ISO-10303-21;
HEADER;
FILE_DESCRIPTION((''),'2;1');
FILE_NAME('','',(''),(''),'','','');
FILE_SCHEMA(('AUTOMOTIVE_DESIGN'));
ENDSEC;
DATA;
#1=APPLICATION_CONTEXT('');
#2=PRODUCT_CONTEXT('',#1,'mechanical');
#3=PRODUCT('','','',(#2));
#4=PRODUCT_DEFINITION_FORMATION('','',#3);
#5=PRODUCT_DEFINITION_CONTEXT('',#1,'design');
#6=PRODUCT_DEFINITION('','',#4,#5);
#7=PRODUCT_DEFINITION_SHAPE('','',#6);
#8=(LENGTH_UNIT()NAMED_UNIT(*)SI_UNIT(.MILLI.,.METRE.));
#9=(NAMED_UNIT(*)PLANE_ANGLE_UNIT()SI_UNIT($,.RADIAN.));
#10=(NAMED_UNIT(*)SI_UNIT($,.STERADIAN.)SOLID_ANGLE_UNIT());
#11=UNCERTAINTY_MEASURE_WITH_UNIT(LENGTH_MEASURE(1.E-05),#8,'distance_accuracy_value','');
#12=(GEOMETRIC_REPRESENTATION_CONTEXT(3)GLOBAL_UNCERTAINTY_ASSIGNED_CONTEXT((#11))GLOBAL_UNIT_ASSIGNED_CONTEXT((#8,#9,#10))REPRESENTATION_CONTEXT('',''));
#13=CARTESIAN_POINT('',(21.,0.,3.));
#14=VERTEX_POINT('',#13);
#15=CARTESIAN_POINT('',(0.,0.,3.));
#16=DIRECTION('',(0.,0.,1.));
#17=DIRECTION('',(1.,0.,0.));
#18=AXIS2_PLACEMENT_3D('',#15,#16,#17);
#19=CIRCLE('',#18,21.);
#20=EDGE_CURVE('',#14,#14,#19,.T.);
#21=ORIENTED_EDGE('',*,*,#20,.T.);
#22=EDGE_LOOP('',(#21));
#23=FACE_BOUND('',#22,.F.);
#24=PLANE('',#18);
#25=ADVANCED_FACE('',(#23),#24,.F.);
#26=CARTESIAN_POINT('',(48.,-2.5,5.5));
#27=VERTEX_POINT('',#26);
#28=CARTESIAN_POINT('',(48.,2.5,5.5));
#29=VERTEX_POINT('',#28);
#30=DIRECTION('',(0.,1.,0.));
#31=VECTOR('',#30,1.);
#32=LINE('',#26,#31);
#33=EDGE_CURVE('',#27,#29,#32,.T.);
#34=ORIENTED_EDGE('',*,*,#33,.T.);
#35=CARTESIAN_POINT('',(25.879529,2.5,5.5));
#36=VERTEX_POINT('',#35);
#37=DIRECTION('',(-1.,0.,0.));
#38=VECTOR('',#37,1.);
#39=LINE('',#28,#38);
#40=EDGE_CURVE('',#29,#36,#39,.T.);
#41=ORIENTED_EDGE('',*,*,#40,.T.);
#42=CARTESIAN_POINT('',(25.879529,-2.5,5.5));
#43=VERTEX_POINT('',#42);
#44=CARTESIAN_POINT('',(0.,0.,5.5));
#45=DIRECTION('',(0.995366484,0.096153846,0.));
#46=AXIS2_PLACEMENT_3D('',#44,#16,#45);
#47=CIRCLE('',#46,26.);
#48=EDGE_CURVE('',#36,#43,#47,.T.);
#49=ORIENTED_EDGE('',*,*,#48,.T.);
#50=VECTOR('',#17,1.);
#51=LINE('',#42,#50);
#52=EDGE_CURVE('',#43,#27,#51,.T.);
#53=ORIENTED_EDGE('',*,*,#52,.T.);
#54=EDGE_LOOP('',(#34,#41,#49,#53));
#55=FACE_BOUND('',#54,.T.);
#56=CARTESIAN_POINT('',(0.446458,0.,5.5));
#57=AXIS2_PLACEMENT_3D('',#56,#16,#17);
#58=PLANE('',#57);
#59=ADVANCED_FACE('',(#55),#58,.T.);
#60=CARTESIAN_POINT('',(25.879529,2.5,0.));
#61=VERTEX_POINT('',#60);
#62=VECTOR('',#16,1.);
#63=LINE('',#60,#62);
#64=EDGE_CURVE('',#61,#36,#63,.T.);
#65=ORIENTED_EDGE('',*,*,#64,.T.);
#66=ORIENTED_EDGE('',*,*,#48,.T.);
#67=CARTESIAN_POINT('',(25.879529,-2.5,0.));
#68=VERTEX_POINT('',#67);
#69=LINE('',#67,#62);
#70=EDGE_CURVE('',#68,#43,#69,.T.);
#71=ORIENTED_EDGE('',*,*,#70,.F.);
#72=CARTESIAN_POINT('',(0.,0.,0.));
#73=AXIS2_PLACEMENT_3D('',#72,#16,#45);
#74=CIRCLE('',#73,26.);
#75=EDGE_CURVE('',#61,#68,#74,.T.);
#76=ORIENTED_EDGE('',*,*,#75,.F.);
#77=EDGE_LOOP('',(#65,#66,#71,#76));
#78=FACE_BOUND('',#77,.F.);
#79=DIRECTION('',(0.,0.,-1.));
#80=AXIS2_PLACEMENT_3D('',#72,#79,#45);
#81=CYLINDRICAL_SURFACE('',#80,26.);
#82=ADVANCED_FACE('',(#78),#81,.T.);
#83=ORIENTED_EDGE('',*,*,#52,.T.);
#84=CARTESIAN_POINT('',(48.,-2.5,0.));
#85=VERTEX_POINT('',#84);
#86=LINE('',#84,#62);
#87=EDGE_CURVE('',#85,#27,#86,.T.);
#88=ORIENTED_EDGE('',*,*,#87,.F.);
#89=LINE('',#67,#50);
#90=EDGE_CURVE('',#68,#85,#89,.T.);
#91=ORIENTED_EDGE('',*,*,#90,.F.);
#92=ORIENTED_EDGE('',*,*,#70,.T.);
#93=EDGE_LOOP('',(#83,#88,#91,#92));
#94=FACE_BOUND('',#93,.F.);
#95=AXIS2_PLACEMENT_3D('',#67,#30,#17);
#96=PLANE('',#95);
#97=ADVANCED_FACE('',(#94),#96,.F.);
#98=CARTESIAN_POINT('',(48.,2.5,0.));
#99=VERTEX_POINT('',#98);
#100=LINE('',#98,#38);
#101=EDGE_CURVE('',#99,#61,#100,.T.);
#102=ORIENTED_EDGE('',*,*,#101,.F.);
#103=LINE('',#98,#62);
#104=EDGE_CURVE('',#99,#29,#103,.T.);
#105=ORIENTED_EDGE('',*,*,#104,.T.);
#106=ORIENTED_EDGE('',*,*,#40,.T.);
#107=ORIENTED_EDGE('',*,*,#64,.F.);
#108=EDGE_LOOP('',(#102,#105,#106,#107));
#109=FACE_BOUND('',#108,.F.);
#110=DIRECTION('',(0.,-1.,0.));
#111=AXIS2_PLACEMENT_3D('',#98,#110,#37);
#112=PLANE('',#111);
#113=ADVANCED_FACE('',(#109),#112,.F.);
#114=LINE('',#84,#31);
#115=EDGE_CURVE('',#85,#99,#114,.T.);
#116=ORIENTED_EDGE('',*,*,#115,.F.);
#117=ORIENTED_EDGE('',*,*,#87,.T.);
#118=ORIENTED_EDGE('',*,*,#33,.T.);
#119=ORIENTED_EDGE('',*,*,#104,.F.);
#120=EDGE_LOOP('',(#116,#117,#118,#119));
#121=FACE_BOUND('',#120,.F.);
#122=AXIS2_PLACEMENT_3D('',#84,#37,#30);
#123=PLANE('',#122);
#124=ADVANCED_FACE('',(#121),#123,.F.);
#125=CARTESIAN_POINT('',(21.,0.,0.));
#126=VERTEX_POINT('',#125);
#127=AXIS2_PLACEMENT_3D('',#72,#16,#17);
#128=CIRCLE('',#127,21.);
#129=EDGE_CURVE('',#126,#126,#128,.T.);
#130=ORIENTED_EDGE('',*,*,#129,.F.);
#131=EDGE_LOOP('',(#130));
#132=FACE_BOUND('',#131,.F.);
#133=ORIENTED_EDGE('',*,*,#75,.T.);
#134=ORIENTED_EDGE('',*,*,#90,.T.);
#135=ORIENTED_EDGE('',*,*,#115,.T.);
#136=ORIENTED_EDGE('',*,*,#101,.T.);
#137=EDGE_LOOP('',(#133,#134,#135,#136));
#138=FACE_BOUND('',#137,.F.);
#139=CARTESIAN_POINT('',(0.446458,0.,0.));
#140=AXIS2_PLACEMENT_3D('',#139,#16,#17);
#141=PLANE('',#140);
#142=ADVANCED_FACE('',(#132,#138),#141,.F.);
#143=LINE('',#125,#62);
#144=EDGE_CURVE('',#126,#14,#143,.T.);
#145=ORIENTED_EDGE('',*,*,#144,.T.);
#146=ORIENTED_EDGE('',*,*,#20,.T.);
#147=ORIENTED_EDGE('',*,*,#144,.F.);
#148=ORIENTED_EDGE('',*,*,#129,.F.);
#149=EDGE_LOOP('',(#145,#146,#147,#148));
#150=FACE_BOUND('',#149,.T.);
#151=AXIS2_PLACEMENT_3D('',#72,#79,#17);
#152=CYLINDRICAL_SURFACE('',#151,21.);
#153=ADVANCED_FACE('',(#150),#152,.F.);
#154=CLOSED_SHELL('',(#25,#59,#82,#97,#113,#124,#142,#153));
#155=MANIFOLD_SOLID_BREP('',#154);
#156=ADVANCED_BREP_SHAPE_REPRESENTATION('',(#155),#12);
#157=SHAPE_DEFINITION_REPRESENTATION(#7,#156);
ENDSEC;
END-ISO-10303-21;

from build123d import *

# Parameters (mm, degrees)
F0_R     = 21
F1_DEPTH = 5.5
F2_DEPTH = 3


# Not quite as in the source:
# - a feature of the source that left no trace in its solid (it failed there, or was rolled back) is left out


with BuildPart() as f1:
    # F0 (on Top) → F1 (new body)
    with BuildSketch(Plane.XY):
        with BuildLine():
            ThreePointArc((25.8795285892, -2.5), (25.9698646831, -1.2514504945), (26, 0))
            ThreePointArc((26, 0), (25.9698646831, 1.2514504945), (25.8795285892, 2.5))
            ThreePointArc((25.8795285892, 2.5), (-26, 0), (25.8795285892, -2.5))
        make_face()
        Circle(F0_R, mode=Mode.SUBTRACT)
        with BuildLine():
            ThreePointArc((25.8795285892, 2.5), (25.9698646831, 1.2514504945), (26, 0))
            ThreePointArc((26, 0), (25.9698646831, -1.2514504945), (25.8795285892, -2.5))
            Line((25.8795285892, -2.5), (48, -2.5))
            Line((48, -2.5), (48, 0))
            Line((48, 0), (48, 2.5))
            Line((48, 2.5), (25.8795285892, 2.5))
        make_face()
        Circle(F0_R)
    extrude(amount=F1_DEPTH)

    # F0 (on Top) → F2 (cut)
    with BuildSketch(Plane.XY):
        Circle(F0_R)
    extrude(amount=F2_DEPTH, mode=Mode.SUBTRACT)


solid = f1.part
